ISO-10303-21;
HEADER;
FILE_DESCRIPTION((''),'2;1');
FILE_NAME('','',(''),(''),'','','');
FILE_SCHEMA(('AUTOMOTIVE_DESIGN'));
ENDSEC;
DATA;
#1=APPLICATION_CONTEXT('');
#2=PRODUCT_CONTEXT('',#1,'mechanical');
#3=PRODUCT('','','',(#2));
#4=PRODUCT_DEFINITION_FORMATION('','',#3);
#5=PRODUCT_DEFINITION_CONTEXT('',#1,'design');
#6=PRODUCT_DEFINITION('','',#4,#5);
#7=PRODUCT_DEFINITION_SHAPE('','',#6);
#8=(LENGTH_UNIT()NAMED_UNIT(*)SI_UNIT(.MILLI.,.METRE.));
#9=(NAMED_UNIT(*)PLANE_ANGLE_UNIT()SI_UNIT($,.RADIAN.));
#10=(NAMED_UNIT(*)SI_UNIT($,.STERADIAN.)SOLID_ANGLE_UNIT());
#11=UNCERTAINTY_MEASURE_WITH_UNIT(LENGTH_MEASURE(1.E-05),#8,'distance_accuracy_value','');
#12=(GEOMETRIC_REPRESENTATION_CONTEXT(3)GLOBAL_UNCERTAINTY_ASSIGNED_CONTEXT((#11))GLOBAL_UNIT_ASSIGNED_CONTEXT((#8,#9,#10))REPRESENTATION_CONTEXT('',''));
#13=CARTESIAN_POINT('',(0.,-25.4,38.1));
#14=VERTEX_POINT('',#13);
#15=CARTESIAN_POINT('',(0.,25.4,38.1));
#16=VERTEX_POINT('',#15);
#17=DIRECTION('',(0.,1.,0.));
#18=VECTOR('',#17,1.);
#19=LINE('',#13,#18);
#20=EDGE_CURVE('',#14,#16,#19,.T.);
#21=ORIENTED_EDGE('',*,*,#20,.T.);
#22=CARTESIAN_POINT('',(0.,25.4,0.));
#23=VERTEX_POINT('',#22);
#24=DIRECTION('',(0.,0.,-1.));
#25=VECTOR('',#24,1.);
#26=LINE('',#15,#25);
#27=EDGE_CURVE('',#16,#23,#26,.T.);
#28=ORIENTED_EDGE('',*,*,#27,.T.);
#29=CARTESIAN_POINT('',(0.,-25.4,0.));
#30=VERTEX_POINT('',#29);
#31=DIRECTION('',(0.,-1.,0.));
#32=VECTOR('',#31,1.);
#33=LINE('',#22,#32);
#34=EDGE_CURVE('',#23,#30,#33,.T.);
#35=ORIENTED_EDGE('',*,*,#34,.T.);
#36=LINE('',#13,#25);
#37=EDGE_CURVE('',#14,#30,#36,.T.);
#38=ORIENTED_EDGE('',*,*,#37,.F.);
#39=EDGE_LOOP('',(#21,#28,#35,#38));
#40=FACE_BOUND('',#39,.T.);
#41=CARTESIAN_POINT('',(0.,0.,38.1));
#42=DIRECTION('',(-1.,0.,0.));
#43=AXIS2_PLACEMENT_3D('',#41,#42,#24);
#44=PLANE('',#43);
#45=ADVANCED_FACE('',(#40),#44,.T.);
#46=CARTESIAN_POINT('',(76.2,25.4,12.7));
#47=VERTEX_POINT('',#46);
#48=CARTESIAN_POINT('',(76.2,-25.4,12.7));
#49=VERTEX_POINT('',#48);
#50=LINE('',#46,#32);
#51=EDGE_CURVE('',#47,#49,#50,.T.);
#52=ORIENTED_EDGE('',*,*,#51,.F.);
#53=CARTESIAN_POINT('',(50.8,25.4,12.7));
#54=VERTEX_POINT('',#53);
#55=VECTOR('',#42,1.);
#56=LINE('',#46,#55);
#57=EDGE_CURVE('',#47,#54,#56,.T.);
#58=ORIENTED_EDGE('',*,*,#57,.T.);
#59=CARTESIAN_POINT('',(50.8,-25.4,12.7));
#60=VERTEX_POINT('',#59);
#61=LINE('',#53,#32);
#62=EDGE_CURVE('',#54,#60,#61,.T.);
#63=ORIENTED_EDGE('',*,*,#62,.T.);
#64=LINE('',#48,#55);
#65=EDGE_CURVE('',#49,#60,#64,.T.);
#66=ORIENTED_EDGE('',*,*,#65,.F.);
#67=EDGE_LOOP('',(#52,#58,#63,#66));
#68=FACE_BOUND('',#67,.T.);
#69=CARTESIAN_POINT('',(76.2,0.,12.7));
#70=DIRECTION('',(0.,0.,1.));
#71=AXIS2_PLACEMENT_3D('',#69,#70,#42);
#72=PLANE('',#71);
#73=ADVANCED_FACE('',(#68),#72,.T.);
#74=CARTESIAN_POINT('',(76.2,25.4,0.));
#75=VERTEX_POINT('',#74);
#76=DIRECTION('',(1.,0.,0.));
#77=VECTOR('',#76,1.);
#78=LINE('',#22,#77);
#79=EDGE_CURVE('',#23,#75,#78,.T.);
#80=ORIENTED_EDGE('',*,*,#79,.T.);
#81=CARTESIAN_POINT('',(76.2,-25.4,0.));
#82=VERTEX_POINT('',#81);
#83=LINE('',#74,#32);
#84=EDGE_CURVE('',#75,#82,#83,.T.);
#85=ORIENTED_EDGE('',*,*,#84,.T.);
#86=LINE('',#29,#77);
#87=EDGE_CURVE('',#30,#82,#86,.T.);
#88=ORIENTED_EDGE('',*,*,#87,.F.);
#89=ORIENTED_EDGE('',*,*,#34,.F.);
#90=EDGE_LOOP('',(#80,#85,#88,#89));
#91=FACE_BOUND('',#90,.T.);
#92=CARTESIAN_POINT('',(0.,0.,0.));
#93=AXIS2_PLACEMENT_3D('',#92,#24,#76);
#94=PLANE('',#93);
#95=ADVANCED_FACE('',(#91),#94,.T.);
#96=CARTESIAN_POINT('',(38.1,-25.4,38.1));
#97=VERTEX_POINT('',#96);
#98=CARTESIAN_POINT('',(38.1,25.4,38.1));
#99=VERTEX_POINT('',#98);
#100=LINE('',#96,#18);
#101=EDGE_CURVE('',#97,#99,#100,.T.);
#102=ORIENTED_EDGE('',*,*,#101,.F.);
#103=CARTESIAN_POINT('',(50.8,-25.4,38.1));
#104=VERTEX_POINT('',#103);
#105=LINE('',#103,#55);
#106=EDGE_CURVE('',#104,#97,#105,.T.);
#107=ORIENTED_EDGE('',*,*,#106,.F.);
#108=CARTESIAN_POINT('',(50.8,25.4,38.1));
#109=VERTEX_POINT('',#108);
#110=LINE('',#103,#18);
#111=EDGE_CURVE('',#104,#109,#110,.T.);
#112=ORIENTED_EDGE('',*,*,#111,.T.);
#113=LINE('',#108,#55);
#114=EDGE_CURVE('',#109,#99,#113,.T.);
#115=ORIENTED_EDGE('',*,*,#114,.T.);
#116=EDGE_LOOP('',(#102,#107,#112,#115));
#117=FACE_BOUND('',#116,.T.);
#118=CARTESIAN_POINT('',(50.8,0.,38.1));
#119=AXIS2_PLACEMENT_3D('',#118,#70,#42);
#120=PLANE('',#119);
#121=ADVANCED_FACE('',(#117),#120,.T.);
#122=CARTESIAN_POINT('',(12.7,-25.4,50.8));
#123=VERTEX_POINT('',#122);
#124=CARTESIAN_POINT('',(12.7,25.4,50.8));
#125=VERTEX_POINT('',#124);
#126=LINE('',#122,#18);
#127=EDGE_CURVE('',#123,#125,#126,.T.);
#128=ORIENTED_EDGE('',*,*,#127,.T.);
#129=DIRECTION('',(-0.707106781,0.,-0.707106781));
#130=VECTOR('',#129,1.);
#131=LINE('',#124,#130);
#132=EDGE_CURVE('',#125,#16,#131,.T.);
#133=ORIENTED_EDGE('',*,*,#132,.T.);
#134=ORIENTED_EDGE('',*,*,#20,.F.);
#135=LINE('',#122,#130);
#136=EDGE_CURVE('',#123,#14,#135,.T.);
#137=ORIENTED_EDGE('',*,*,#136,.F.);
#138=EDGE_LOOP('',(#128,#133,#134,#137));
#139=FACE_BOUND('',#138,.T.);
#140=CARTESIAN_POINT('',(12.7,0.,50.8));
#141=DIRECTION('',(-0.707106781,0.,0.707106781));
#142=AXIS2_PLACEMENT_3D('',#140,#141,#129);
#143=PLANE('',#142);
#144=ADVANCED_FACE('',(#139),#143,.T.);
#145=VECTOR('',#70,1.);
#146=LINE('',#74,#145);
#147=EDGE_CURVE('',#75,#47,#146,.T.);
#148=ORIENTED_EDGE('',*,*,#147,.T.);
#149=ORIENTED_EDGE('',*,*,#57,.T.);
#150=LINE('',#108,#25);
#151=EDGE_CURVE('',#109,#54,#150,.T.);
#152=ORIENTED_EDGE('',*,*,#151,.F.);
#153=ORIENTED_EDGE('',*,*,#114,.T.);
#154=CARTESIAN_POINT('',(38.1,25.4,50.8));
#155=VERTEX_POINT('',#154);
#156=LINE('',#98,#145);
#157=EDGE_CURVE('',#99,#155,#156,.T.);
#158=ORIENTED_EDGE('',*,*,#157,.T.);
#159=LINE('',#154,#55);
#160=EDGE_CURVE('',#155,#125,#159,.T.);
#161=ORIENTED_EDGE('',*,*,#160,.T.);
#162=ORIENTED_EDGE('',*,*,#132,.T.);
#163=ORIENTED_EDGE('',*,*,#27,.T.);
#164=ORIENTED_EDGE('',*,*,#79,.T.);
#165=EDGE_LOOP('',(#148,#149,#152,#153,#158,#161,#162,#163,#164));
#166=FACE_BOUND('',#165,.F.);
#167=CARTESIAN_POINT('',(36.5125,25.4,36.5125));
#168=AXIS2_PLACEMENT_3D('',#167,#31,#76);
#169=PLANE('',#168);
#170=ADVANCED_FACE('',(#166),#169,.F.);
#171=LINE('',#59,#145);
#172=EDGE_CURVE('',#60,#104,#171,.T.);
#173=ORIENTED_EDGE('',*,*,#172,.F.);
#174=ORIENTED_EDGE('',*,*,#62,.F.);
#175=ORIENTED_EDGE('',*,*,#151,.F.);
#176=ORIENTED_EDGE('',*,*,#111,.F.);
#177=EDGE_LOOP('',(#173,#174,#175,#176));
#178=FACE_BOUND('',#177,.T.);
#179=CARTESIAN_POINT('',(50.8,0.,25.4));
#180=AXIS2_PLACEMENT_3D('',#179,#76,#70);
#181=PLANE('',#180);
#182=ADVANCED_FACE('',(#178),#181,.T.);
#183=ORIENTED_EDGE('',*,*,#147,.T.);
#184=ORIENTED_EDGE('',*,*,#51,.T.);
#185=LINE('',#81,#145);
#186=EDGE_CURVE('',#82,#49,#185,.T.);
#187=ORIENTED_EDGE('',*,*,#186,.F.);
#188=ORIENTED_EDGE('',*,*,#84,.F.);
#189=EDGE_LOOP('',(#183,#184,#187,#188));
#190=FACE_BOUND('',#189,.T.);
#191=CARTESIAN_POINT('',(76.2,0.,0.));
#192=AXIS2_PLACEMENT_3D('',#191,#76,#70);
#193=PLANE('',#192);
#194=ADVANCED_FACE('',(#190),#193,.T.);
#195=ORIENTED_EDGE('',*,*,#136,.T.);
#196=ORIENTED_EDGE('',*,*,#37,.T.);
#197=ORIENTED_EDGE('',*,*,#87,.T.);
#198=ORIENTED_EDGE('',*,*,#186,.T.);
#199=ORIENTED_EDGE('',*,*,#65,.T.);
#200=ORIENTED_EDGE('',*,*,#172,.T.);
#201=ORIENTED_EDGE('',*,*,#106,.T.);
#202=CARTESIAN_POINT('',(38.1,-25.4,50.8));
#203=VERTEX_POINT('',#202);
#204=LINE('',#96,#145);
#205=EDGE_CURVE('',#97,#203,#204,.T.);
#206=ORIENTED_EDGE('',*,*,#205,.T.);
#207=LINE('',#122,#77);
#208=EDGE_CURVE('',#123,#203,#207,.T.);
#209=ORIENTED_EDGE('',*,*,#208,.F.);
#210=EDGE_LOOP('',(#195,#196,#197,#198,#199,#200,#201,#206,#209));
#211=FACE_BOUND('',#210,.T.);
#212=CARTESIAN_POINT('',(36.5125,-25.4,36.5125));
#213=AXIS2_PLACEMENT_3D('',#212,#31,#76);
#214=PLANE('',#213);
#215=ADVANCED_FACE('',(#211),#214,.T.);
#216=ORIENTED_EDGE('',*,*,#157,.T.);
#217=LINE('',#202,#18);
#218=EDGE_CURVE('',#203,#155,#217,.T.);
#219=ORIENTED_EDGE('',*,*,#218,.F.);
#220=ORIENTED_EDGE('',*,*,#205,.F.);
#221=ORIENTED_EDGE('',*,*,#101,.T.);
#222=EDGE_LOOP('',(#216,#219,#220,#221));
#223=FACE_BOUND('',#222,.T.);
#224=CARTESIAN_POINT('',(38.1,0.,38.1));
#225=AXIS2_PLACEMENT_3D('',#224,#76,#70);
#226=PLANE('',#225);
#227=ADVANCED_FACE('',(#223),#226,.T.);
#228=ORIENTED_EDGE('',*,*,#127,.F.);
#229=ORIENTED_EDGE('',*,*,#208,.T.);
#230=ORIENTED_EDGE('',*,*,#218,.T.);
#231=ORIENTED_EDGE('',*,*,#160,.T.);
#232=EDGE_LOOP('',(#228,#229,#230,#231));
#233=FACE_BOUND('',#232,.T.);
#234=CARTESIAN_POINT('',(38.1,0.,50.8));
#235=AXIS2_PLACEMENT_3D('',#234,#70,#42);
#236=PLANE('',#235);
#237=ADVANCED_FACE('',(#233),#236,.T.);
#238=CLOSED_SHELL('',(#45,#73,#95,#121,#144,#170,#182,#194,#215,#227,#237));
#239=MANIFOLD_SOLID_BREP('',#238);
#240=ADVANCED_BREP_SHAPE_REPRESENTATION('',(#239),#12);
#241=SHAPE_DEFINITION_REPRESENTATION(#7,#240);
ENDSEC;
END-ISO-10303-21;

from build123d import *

# Parameters (mm, degrees)
F1_DEPTH = 25.4
F2_DEPTH = 25.4
F3_DEPTH = 12.7


# Not quite as in the source:
# - a feature names something its author has since deleted; it is built from what else it names


with BuildPart() as f1:
    # F0 (on Front) → F1 (new body, symmetric)
    with BuildSketch(Plane.XZ):
        Polygon((0, 38.1), (0, 0), (76.2, 0), (76.2, 12.7), (50.8, 12.7), (50.8, 25.4), (25.4, 25.4), (25.4, 50.8), (12.7, 50.8), align=None)
    extrude(amount=F1_DEPTH, both=True)

    # F0 (on Front) → F2 (join, symmetric)
    with BuildSketch(Plane.XZ):
        Polygon((38.1, 50.8), (25.4, 50.8), (25.4, 25.4), (50.8, 25.4), (50.8, 38.1), (38.1, 38.1), align=None)
    extrude(amount=F2_DEPTH, both=True)

    # F0 (on Front) → F3 (join, symmetric)
    with BuildSketch(Plane.XZ):
        Polygon((38.1, 50.8), (25.4, 50.8), (25.4, 25.4), (50.8, 25.4), (50.8, 38.1), (38.1, 38.1), align=None)
    extrude(amount=F3_DEPTH, both=True)


solid = f1.part
